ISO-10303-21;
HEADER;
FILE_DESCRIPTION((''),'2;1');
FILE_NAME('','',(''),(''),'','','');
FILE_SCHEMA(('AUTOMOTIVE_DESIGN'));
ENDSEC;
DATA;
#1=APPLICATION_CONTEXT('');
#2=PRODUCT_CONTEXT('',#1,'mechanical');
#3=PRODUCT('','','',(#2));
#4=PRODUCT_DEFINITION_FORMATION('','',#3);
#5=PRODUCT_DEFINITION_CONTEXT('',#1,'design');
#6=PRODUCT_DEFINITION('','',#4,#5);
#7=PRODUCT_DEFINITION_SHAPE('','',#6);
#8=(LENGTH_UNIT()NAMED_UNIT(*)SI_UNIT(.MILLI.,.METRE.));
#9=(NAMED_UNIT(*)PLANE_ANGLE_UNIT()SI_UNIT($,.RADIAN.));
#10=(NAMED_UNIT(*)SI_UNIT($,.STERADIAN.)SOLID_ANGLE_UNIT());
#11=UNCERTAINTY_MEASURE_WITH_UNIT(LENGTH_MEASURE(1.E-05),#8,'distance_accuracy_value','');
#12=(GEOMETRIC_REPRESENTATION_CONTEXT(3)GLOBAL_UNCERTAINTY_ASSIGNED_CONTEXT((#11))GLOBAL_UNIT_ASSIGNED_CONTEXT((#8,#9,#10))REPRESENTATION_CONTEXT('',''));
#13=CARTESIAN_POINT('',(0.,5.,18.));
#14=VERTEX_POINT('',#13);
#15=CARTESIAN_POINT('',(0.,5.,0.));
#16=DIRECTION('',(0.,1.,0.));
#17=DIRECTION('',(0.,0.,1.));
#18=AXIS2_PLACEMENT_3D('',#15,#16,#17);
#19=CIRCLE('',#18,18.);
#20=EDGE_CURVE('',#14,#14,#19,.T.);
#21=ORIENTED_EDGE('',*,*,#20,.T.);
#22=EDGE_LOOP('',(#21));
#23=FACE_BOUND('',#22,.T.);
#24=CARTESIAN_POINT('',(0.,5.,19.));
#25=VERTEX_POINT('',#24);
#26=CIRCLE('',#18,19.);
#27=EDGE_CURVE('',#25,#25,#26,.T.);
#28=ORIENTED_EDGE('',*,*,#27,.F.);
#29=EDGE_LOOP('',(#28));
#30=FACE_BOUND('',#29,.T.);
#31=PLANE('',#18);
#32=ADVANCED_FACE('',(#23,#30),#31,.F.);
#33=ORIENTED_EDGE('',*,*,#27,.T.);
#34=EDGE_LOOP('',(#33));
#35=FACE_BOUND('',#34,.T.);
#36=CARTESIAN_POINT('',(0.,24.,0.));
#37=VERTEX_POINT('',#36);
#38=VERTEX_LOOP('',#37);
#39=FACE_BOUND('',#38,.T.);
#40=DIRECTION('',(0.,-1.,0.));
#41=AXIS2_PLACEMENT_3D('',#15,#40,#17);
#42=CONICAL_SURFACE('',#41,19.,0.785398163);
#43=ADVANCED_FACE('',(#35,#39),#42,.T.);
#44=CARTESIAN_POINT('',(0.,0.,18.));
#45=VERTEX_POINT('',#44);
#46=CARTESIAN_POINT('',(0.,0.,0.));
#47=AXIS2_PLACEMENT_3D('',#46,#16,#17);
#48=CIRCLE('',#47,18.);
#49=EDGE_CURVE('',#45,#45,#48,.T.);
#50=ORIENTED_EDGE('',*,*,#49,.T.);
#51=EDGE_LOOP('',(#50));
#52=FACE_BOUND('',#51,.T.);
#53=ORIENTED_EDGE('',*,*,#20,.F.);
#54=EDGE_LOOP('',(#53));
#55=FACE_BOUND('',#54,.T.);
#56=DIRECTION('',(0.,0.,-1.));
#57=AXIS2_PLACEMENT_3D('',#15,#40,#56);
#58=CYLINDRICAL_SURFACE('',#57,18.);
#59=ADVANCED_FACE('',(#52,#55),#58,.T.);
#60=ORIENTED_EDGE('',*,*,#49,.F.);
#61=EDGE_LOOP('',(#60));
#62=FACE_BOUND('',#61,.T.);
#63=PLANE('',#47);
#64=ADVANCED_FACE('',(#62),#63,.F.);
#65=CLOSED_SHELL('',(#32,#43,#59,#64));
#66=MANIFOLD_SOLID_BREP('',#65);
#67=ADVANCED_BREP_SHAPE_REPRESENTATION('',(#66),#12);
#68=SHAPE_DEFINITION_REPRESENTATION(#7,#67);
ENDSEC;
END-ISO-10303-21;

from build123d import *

# Parameters (mm, degrees)
SKETCH1_R           = 18
BOSS_EXTRUDE1_DEPTH = 5


# Read off the part's stored shape, not the designer's step: Boss-Extrude2
with BuildPart() as part:
    # Sketch1 → Boss-Extrude1 (new body)
    with BuildSketch(Plane(origin=(0, 0, 0), x_dir=(1, 0, 0), z_dir=(0, 1, 0))):
        with Locations(Location((0, 0, 0), (0, 0, 270))):
            Circle(SKETCH1_R)
    extrude(amount=BOSS_EXTRUDE1_DEPTH)

    # Boss-Extrude2 outline → Boss-Extrude2 (revolve)
    with BuildSketch(Plane.XY):
        Polygon((19, 5), (0, 24), (0, 5), align=None)
    revolve(axis=Axis((0, 0, 0), (0, 1, 0)))


solid = part.part
